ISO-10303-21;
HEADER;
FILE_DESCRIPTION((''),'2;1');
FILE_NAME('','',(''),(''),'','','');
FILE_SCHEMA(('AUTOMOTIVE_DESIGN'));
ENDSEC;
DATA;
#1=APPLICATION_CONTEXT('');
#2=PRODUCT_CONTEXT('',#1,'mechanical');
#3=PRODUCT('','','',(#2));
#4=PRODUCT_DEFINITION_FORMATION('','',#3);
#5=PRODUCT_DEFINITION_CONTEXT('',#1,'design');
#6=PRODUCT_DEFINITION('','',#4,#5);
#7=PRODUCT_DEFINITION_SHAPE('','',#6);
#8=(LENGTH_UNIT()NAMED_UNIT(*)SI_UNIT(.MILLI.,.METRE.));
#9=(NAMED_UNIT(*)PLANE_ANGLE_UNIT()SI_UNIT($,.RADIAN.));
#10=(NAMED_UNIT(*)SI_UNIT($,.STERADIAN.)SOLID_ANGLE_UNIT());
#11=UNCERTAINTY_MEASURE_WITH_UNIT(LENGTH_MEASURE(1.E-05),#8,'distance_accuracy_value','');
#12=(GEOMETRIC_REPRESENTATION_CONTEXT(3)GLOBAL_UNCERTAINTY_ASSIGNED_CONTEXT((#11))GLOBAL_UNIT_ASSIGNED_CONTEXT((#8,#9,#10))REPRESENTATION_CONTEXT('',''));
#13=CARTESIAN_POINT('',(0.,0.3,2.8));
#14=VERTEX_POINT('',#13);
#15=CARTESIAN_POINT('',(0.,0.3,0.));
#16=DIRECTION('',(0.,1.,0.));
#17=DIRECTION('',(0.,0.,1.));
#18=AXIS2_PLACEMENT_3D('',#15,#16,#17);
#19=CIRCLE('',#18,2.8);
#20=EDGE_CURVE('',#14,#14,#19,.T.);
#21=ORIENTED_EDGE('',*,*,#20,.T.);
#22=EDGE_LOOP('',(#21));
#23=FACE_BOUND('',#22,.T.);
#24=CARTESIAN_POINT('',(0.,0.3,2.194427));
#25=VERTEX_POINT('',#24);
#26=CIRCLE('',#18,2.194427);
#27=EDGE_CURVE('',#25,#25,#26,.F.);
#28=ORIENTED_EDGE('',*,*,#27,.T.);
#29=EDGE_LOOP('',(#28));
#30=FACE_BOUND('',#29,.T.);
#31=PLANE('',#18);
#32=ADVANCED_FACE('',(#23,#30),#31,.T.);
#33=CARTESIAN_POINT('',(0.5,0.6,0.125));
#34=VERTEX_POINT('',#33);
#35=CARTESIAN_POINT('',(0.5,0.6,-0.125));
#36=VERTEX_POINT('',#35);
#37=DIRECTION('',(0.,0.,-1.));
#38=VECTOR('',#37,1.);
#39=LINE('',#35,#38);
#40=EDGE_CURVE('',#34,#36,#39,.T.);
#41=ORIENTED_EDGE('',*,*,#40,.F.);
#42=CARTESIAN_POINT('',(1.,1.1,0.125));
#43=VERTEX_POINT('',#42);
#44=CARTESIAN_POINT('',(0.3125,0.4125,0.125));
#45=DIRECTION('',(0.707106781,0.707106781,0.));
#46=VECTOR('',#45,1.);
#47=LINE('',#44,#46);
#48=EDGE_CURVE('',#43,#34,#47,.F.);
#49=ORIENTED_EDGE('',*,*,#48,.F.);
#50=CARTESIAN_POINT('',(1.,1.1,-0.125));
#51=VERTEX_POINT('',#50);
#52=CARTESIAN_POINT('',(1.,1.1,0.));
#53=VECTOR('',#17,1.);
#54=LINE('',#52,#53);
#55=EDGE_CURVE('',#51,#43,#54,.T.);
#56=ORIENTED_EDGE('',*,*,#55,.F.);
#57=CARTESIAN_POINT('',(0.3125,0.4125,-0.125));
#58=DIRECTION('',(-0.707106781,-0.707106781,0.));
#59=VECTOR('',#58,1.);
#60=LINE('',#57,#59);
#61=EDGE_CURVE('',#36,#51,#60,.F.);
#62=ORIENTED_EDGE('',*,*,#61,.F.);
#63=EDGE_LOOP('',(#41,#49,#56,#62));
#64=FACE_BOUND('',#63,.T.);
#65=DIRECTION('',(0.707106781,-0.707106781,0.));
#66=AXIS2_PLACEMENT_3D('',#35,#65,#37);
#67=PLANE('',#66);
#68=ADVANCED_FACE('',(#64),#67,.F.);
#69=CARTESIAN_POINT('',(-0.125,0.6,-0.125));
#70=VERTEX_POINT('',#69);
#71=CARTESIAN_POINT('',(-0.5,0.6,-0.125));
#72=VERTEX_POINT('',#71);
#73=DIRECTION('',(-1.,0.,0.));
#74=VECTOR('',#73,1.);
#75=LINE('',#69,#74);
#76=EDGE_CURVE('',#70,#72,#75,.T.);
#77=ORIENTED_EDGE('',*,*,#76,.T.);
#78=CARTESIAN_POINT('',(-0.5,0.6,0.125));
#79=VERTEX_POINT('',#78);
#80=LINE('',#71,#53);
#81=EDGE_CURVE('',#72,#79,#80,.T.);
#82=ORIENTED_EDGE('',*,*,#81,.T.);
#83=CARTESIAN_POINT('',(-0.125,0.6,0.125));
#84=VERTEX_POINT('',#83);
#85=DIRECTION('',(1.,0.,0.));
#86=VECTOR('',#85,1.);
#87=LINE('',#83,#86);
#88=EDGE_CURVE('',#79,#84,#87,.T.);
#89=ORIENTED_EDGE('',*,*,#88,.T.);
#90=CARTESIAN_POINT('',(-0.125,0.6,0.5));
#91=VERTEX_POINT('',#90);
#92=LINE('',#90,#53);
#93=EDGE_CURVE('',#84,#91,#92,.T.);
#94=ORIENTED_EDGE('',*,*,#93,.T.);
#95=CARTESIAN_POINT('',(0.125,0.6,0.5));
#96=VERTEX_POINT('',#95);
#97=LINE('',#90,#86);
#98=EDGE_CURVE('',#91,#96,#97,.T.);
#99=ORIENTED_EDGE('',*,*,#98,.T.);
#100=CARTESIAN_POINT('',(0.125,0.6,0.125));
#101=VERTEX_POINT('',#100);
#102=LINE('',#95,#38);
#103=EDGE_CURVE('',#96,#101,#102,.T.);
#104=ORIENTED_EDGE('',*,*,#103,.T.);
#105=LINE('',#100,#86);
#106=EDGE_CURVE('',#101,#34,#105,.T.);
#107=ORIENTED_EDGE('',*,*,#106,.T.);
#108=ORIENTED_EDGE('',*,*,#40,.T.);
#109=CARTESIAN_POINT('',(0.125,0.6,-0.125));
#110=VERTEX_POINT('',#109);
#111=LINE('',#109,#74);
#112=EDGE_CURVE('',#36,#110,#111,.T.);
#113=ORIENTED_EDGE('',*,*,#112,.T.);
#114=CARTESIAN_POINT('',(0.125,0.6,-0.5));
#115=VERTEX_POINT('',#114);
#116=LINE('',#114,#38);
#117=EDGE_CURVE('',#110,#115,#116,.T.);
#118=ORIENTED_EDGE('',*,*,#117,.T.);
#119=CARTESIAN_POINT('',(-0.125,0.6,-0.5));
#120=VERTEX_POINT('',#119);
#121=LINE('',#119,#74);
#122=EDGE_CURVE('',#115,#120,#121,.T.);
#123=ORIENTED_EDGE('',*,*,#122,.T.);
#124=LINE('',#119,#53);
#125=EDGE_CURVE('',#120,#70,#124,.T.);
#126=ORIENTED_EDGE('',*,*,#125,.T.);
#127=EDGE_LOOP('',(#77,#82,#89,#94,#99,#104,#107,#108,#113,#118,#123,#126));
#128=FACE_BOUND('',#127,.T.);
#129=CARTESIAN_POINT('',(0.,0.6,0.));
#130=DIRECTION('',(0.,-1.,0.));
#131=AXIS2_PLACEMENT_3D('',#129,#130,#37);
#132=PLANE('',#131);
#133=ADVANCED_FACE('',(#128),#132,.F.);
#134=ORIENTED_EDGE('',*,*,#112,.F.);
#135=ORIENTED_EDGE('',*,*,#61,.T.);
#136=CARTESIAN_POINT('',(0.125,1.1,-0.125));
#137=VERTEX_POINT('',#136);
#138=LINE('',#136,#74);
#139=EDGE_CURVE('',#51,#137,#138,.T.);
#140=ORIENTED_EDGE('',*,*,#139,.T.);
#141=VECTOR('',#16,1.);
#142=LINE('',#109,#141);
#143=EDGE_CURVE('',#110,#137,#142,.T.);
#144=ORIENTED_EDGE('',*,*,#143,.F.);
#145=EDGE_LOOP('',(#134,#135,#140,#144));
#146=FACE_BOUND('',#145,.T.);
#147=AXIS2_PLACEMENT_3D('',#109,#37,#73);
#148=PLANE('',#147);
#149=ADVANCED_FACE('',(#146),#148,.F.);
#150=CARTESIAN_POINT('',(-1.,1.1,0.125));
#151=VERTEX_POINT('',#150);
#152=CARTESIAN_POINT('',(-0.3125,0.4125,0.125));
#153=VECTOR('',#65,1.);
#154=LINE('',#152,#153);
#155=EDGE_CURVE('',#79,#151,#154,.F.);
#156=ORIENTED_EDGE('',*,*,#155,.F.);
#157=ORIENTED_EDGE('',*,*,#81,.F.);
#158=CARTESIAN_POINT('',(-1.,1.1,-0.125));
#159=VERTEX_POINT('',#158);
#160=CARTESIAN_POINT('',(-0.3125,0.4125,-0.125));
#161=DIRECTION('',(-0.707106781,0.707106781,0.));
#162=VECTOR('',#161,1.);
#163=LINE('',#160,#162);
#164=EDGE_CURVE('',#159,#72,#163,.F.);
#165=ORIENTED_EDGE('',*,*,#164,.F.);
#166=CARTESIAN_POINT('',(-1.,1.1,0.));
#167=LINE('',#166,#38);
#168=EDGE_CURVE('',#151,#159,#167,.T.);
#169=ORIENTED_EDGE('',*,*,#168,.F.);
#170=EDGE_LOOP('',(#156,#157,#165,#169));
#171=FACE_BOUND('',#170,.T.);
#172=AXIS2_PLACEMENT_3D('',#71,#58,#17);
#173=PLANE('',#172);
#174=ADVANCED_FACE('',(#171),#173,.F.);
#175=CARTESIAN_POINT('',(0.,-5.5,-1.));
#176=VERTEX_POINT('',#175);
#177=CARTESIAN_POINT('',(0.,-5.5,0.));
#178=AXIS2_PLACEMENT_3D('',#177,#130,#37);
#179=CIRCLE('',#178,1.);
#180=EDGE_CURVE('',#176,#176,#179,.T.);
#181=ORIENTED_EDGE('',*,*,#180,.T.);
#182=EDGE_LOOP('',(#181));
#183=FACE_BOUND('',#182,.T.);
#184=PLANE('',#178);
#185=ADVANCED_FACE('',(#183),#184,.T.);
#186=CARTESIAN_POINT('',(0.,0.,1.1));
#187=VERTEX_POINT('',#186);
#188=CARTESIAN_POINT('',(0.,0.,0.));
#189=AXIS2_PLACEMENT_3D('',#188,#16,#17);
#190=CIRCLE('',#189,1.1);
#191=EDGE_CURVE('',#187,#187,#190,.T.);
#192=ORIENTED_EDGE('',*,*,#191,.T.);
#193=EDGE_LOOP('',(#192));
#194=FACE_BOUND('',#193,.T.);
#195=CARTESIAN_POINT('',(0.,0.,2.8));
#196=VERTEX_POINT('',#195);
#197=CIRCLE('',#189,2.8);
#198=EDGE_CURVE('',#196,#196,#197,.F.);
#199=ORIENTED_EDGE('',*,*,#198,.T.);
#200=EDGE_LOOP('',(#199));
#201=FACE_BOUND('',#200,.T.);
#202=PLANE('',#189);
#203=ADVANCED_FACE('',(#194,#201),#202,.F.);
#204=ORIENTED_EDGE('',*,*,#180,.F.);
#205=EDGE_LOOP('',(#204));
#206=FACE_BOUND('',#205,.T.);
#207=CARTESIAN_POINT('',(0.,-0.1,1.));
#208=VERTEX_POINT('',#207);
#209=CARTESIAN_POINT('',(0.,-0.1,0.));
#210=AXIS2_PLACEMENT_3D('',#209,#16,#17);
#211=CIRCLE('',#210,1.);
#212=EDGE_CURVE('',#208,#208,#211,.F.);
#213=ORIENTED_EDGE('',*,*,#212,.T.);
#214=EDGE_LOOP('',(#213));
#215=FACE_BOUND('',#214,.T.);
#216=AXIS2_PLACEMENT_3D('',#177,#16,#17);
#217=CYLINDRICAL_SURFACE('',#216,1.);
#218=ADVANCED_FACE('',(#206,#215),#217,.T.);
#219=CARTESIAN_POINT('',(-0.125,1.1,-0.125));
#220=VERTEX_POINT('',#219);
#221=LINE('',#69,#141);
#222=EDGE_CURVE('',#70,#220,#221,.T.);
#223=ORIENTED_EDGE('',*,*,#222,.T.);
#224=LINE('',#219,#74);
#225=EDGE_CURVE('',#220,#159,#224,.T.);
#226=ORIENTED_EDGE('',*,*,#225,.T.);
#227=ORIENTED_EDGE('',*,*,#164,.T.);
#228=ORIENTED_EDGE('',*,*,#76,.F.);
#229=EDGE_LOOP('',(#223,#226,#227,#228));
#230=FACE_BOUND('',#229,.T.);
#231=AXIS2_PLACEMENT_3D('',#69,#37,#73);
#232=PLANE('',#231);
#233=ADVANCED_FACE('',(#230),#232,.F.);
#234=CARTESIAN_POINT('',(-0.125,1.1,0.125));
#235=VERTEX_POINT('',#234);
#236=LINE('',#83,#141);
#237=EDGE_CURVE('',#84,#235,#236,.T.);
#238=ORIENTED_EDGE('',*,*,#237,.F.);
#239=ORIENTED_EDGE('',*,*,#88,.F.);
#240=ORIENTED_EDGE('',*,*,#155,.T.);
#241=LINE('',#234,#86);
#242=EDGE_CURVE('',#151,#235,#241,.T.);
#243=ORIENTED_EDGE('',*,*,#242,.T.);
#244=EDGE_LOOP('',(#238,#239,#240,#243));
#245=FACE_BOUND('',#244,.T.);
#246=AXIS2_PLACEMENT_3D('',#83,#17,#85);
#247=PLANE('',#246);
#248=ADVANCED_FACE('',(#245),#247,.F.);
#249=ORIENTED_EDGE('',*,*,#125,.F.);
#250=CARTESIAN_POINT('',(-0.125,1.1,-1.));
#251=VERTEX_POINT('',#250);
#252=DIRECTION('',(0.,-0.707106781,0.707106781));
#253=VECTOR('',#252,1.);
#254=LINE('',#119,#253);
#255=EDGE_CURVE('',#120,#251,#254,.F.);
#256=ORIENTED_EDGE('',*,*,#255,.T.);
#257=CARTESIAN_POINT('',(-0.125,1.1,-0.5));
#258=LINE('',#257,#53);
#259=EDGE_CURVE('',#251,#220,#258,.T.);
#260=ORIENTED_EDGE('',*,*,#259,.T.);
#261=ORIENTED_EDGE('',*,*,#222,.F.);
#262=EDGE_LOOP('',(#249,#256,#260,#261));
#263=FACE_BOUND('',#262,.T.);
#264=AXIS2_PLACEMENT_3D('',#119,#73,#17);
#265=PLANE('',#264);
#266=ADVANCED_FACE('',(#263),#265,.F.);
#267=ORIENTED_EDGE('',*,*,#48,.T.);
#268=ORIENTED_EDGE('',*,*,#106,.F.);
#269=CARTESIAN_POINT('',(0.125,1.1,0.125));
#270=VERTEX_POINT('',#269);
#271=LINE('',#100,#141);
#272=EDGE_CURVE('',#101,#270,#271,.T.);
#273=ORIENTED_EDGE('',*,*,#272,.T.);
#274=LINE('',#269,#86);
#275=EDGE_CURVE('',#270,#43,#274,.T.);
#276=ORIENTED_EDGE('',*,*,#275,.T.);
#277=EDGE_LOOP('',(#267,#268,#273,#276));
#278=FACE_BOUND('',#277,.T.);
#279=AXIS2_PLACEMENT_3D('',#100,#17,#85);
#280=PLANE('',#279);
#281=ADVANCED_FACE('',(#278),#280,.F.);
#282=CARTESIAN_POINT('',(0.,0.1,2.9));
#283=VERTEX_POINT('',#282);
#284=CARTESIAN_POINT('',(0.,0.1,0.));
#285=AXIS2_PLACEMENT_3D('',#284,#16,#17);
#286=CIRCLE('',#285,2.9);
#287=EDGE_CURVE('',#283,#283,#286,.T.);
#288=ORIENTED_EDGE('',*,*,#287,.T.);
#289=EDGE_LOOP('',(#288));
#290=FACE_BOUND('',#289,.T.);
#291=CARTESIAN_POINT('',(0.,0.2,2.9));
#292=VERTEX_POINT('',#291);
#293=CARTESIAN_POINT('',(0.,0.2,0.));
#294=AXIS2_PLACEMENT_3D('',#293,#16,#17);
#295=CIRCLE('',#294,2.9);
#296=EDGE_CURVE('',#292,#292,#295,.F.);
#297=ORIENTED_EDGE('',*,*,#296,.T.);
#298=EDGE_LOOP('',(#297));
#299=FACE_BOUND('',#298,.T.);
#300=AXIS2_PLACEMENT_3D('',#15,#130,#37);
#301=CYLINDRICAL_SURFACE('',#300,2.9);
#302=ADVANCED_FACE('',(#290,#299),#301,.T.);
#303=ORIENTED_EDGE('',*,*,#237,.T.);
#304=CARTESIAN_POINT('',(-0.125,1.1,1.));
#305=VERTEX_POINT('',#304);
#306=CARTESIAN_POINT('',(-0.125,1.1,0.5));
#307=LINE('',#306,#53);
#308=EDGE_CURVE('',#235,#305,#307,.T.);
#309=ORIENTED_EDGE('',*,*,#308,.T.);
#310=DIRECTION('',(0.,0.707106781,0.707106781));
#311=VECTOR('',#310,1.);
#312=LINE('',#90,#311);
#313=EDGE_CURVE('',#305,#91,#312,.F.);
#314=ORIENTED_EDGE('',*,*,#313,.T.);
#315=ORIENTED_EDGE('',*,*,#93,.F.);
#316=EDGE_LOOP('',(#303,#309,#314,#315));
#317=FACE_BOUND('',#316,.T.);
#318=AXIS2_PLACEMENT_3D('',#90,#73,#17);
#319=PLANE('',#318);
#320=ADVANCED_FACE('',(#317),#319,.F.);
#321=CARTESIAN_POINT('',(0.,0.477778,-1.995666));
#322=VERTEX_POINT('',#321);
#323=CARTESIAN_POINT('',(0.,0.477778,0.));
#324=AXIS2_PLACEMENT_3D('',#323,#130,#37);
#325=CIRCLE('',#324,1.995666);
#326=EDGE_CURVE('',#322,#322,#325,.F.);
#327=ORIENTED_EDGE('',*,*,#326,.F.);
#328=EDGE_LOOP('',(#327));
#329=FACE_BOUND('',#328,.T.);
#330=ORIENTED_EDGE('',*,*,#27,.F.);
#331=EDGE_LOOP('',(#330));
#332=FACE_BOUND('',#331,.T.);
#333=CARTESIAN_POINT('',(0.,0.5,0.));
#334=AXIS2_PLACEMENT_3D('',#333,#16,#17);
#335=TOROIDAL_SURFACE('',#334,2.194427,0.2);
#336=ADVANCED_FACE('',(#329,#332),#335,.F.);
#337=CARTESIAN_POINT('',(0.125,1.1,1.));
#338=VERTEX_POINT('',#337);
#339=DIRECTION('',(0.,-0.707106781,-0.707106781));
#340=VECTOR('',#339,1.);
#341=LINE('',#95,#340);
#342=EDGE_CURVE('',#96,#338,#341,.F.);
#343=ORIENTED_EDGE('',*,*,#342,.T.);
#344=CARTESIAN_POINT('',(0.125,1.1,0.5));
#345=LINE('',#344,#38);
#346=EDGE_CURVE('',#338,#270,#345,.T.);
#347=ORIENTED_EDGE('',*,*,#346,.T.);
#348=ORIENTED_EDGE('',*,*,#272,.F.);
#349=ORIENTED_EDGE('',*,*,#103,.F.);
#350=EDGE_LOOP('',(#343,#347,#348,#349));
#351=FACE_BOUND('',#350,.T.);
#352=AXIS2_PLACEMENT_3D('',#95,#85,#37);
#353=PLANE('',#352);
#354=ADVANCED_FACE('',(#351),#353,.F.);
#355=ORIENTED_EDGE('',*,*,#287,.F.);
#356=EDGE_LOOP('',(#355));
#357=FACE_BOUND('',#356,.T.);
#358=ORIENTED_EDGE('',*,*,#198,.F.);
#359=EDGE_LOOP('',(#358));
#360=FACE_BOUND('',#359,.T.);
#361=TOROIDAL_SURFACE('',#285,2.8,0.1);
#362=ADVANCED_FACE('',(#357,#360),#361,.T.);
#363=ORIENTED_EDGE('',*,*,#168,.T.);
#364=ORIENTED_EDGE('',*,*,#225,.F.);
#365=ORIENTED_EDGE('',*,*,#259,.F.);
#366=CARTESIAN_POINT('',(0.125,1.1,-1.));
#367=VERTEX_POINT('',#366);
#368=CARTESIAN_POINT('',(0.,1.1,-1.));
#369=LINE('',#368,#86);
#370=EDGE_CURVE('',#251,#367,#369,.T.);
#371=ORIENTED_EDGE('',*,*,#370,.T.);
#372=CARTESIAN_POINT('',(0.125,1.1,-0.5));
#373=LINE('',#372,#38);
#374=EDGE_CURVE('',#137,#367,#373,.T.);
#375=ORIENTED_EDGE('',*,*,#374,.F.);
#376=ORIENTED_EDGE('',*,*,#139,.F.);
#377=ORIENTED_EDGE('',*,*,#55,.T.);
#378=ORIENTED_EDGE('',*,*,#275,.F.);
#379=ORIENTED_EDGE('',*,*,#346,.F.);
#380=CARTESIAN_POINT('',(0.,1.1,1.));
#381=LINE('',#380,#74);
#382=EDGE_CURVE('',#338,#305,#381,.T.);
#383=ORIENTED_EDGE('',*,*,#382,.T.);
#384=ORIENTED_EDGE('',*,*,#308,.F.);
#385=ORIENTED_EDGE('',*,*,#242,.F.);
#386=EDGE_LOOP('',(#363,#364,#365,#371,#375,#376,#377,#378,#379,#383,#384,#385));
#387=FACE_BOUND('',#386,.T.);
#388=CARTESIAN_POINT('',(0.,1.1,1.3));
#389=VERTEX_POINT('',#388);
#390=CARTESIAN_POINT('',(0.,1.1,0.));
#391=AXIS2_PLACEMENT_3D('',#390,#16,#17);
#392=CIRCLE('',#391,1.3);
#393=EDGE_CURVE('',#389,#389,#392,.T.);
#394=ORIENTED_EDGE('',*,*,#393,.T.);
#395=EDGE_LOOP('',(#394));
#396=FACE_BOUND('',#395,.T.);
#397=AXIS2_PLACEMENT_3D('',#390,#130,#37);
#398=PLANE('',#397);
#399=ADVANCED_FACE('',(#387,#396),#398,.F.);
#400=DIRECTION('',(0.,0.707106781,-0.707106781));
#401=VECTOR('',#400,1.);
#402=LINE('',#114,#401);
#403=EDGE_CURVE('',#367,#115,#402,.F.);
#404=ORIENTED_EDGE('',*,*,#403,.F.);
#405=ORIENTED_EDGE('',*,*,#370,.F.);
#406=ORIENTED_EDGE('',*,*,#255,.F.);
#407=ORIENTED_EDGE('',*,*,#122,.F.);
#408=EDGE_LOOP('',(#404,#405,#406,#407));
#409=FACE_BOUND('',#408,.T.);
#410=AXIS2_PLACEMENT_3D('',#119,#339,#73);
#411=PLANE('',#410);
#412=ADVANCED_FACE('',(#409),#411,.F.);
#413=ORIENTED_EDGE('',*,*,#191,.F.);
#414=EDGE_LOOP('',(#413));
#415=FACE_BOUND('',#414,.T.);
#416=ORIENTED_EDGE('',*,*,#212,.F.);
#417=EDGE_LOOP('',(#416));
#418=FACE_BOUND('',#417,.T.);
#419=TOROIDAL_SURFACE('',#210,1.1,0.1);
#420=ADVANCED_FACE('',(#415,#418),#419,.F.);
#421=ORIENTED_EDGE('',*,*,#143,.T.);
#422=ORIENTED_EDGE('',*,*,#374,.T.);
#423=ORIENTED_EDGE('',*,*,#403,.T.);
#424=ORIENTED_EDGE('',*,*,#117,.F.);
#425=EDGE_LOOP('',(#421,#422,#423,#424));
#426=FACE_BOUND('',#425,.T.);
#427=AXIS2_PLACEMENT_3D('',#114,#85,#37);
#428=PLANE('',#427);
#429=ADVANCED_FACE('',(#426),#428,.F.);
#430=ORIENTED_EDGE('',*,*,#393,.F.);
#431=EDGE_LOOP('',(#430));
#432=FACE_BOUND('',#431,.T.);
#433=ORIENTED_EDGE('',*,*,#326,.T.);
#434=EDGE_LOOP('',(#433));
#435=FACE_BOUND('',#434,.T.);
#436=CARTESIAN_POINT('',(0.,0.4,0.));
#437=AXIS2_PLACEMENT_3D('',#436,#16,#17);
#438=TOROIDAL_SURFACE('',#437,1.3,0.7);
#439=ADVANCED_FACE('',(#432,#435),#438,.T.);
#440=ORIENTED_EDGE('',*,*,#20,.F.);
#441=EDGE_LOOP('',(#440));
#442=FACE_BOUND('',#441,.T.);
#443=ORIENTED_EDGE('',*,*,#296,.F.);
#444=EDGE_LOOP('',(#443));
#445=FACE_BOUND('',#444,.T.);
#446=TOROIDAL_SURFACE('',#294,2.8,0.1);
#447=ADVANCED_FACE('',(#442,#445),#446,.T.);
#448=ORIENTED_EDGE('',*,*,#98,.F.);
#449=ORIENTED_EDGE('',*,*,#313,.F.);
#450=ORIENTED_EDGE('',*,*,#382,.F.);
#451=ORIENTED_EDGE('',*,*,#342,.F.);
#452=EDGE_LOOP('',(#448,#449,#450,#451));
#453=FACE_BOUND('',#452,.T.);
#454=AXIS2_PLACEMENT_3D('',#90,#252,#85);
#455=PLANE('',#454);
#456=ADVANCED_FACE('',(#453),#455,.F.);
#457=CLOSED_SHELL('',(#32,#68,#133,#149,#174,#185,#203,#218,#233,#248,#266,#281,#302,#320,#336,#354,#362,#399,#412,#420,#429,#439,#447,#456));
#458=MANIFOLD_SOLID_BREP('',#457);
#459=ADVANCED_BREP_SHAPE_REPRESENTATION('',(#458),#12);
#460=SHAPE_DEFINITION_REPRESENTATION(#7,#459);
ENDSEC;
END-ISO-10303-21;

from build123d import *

# Parameters (mm, degrees)
SKETCH2_R           = 2.9
BOSS_EXTRUDE1_DEPTH = 0.3
FILLET1_R           = 0.1
SKETCH4_R           = 1
BOSS_EXTRUDE2_DEPTH = 5.5
CUT_EXTRUDE1_DEPTH  = 0.5
CHAMFER2_SIZE       = 0.5
FILLET2_R           = 0.2
FILLET3_R           = 0.1
FILLET4_R           = 0.1


with BuildPart() as part:
    # Sketch2 → Boss-Extrude1 (new body)
    with BuildSketch(Plane(origin=(0, 0, 0), x_dir=(1, 0, 0), z_dir=(0, 1, 0))):
        with Locations(Location((0, 0, 0), (0, 0, 270))):
            Circle(SKETCH2_R)
    extrude(amount=BOSS_EXTRUDE1_DEPTH)

    # Fillet1
    fillet1_edges = [part.edges().sort_by_distance(p)[0] for p in [
        (0, 0.3, -2.9),
    ]]
    fillet(fillet1_edges, radius=FILLET1_R)

    # Sketch3 → Revolve1 (revolve)
    with BuildSketch(Plane.XY, mode=Mode.PRIVATE) as revolve1_sk:
        with BuildLine():
            Line((2, 0.3), (0, 0.3))
            Line((0, 0.3), (0, 1.1))
            Line((0, 1.1), (1.3, 1.1))
            ThreePointArc((1.3, 1.1), (1.794974747, 0.894974747), (2, 0.4))
            Line((2, 0.4), (2, 0.3))
        make_face()
    revolve(revolve1_sk.sketch.rotate(Axis((0, 0, 0), (0, -1, 0)), 90), axis=Axis((0, 0, 0), (0, -1, 0)))

    # Sketch4 → Boss-Extrude2 (add)
    with BuildSketch(Plane.XZ):
        with Locations(Location((0, 0, 0), (0, 0, 270))):
            Circle(SKETCH4_R)
    extrude(amount=BOSS_EXTRUDE2_DEPTH)

    # Sketch5 → Cut-Extrude1 (cut)
    with BuildSketch(Plane(origin=(0, 1.1, 0), x_dir=(1, 0, 0), z_dir=(0, 1, 0))):
        Polygon((-0.125, 0.5), (0.125, 0.5), (0.125, 0.125), (0.5, 0.125), (0.5, -0.125), (0.125, -0.125), (0.125, -0.5), (-0.125, -0.5), (-0.125, -0.125), (-0.5, -0.125), (-0.5, 0.125), (-0.125, 0.125), align=None)
    extrude(amount=-CUT_EXTRUDE1_DEPTH, mode=Mode.SUBTRACT)

    # Chamfer2
    chamfer2_edges = [part.edges().sort_by_distance(p)[0] for p in [
        (-0.5, 1.1, 0),
        (0, 1.1, 0.5),
        (0.5, 1.1, 0),
        (0, 1.1, -0.5),
    ]]
    chamfer(chamfer2_edges, length=CHAMFER2_SIZE - 0.0001)  # a hair under: the kernel refuses the full size

    # Fillet2
    fillet2_edges = [part.edges().sort_by_distance(p)[0] for p in [
        (0, 0.3, -2),
    ]]
    fillet(fillet2_edges, radius=FILLET2_R)

    # Fillet3
    fillet3_edges = [part.edges().sort_by_distance(p)[0] for p in [
        (0, 0, -2.9),
    ]]
    fillet(fillet3_edges, radius=FILLET3_R)

    # Fillet4
    fillet4_edges = [part.edges().sort_by_distance(p)[0] for p in [
        (0, 0, 1),
    ]]
    fillet(fillet4_edges, radius=FILLET4_R)


solid = part.part
